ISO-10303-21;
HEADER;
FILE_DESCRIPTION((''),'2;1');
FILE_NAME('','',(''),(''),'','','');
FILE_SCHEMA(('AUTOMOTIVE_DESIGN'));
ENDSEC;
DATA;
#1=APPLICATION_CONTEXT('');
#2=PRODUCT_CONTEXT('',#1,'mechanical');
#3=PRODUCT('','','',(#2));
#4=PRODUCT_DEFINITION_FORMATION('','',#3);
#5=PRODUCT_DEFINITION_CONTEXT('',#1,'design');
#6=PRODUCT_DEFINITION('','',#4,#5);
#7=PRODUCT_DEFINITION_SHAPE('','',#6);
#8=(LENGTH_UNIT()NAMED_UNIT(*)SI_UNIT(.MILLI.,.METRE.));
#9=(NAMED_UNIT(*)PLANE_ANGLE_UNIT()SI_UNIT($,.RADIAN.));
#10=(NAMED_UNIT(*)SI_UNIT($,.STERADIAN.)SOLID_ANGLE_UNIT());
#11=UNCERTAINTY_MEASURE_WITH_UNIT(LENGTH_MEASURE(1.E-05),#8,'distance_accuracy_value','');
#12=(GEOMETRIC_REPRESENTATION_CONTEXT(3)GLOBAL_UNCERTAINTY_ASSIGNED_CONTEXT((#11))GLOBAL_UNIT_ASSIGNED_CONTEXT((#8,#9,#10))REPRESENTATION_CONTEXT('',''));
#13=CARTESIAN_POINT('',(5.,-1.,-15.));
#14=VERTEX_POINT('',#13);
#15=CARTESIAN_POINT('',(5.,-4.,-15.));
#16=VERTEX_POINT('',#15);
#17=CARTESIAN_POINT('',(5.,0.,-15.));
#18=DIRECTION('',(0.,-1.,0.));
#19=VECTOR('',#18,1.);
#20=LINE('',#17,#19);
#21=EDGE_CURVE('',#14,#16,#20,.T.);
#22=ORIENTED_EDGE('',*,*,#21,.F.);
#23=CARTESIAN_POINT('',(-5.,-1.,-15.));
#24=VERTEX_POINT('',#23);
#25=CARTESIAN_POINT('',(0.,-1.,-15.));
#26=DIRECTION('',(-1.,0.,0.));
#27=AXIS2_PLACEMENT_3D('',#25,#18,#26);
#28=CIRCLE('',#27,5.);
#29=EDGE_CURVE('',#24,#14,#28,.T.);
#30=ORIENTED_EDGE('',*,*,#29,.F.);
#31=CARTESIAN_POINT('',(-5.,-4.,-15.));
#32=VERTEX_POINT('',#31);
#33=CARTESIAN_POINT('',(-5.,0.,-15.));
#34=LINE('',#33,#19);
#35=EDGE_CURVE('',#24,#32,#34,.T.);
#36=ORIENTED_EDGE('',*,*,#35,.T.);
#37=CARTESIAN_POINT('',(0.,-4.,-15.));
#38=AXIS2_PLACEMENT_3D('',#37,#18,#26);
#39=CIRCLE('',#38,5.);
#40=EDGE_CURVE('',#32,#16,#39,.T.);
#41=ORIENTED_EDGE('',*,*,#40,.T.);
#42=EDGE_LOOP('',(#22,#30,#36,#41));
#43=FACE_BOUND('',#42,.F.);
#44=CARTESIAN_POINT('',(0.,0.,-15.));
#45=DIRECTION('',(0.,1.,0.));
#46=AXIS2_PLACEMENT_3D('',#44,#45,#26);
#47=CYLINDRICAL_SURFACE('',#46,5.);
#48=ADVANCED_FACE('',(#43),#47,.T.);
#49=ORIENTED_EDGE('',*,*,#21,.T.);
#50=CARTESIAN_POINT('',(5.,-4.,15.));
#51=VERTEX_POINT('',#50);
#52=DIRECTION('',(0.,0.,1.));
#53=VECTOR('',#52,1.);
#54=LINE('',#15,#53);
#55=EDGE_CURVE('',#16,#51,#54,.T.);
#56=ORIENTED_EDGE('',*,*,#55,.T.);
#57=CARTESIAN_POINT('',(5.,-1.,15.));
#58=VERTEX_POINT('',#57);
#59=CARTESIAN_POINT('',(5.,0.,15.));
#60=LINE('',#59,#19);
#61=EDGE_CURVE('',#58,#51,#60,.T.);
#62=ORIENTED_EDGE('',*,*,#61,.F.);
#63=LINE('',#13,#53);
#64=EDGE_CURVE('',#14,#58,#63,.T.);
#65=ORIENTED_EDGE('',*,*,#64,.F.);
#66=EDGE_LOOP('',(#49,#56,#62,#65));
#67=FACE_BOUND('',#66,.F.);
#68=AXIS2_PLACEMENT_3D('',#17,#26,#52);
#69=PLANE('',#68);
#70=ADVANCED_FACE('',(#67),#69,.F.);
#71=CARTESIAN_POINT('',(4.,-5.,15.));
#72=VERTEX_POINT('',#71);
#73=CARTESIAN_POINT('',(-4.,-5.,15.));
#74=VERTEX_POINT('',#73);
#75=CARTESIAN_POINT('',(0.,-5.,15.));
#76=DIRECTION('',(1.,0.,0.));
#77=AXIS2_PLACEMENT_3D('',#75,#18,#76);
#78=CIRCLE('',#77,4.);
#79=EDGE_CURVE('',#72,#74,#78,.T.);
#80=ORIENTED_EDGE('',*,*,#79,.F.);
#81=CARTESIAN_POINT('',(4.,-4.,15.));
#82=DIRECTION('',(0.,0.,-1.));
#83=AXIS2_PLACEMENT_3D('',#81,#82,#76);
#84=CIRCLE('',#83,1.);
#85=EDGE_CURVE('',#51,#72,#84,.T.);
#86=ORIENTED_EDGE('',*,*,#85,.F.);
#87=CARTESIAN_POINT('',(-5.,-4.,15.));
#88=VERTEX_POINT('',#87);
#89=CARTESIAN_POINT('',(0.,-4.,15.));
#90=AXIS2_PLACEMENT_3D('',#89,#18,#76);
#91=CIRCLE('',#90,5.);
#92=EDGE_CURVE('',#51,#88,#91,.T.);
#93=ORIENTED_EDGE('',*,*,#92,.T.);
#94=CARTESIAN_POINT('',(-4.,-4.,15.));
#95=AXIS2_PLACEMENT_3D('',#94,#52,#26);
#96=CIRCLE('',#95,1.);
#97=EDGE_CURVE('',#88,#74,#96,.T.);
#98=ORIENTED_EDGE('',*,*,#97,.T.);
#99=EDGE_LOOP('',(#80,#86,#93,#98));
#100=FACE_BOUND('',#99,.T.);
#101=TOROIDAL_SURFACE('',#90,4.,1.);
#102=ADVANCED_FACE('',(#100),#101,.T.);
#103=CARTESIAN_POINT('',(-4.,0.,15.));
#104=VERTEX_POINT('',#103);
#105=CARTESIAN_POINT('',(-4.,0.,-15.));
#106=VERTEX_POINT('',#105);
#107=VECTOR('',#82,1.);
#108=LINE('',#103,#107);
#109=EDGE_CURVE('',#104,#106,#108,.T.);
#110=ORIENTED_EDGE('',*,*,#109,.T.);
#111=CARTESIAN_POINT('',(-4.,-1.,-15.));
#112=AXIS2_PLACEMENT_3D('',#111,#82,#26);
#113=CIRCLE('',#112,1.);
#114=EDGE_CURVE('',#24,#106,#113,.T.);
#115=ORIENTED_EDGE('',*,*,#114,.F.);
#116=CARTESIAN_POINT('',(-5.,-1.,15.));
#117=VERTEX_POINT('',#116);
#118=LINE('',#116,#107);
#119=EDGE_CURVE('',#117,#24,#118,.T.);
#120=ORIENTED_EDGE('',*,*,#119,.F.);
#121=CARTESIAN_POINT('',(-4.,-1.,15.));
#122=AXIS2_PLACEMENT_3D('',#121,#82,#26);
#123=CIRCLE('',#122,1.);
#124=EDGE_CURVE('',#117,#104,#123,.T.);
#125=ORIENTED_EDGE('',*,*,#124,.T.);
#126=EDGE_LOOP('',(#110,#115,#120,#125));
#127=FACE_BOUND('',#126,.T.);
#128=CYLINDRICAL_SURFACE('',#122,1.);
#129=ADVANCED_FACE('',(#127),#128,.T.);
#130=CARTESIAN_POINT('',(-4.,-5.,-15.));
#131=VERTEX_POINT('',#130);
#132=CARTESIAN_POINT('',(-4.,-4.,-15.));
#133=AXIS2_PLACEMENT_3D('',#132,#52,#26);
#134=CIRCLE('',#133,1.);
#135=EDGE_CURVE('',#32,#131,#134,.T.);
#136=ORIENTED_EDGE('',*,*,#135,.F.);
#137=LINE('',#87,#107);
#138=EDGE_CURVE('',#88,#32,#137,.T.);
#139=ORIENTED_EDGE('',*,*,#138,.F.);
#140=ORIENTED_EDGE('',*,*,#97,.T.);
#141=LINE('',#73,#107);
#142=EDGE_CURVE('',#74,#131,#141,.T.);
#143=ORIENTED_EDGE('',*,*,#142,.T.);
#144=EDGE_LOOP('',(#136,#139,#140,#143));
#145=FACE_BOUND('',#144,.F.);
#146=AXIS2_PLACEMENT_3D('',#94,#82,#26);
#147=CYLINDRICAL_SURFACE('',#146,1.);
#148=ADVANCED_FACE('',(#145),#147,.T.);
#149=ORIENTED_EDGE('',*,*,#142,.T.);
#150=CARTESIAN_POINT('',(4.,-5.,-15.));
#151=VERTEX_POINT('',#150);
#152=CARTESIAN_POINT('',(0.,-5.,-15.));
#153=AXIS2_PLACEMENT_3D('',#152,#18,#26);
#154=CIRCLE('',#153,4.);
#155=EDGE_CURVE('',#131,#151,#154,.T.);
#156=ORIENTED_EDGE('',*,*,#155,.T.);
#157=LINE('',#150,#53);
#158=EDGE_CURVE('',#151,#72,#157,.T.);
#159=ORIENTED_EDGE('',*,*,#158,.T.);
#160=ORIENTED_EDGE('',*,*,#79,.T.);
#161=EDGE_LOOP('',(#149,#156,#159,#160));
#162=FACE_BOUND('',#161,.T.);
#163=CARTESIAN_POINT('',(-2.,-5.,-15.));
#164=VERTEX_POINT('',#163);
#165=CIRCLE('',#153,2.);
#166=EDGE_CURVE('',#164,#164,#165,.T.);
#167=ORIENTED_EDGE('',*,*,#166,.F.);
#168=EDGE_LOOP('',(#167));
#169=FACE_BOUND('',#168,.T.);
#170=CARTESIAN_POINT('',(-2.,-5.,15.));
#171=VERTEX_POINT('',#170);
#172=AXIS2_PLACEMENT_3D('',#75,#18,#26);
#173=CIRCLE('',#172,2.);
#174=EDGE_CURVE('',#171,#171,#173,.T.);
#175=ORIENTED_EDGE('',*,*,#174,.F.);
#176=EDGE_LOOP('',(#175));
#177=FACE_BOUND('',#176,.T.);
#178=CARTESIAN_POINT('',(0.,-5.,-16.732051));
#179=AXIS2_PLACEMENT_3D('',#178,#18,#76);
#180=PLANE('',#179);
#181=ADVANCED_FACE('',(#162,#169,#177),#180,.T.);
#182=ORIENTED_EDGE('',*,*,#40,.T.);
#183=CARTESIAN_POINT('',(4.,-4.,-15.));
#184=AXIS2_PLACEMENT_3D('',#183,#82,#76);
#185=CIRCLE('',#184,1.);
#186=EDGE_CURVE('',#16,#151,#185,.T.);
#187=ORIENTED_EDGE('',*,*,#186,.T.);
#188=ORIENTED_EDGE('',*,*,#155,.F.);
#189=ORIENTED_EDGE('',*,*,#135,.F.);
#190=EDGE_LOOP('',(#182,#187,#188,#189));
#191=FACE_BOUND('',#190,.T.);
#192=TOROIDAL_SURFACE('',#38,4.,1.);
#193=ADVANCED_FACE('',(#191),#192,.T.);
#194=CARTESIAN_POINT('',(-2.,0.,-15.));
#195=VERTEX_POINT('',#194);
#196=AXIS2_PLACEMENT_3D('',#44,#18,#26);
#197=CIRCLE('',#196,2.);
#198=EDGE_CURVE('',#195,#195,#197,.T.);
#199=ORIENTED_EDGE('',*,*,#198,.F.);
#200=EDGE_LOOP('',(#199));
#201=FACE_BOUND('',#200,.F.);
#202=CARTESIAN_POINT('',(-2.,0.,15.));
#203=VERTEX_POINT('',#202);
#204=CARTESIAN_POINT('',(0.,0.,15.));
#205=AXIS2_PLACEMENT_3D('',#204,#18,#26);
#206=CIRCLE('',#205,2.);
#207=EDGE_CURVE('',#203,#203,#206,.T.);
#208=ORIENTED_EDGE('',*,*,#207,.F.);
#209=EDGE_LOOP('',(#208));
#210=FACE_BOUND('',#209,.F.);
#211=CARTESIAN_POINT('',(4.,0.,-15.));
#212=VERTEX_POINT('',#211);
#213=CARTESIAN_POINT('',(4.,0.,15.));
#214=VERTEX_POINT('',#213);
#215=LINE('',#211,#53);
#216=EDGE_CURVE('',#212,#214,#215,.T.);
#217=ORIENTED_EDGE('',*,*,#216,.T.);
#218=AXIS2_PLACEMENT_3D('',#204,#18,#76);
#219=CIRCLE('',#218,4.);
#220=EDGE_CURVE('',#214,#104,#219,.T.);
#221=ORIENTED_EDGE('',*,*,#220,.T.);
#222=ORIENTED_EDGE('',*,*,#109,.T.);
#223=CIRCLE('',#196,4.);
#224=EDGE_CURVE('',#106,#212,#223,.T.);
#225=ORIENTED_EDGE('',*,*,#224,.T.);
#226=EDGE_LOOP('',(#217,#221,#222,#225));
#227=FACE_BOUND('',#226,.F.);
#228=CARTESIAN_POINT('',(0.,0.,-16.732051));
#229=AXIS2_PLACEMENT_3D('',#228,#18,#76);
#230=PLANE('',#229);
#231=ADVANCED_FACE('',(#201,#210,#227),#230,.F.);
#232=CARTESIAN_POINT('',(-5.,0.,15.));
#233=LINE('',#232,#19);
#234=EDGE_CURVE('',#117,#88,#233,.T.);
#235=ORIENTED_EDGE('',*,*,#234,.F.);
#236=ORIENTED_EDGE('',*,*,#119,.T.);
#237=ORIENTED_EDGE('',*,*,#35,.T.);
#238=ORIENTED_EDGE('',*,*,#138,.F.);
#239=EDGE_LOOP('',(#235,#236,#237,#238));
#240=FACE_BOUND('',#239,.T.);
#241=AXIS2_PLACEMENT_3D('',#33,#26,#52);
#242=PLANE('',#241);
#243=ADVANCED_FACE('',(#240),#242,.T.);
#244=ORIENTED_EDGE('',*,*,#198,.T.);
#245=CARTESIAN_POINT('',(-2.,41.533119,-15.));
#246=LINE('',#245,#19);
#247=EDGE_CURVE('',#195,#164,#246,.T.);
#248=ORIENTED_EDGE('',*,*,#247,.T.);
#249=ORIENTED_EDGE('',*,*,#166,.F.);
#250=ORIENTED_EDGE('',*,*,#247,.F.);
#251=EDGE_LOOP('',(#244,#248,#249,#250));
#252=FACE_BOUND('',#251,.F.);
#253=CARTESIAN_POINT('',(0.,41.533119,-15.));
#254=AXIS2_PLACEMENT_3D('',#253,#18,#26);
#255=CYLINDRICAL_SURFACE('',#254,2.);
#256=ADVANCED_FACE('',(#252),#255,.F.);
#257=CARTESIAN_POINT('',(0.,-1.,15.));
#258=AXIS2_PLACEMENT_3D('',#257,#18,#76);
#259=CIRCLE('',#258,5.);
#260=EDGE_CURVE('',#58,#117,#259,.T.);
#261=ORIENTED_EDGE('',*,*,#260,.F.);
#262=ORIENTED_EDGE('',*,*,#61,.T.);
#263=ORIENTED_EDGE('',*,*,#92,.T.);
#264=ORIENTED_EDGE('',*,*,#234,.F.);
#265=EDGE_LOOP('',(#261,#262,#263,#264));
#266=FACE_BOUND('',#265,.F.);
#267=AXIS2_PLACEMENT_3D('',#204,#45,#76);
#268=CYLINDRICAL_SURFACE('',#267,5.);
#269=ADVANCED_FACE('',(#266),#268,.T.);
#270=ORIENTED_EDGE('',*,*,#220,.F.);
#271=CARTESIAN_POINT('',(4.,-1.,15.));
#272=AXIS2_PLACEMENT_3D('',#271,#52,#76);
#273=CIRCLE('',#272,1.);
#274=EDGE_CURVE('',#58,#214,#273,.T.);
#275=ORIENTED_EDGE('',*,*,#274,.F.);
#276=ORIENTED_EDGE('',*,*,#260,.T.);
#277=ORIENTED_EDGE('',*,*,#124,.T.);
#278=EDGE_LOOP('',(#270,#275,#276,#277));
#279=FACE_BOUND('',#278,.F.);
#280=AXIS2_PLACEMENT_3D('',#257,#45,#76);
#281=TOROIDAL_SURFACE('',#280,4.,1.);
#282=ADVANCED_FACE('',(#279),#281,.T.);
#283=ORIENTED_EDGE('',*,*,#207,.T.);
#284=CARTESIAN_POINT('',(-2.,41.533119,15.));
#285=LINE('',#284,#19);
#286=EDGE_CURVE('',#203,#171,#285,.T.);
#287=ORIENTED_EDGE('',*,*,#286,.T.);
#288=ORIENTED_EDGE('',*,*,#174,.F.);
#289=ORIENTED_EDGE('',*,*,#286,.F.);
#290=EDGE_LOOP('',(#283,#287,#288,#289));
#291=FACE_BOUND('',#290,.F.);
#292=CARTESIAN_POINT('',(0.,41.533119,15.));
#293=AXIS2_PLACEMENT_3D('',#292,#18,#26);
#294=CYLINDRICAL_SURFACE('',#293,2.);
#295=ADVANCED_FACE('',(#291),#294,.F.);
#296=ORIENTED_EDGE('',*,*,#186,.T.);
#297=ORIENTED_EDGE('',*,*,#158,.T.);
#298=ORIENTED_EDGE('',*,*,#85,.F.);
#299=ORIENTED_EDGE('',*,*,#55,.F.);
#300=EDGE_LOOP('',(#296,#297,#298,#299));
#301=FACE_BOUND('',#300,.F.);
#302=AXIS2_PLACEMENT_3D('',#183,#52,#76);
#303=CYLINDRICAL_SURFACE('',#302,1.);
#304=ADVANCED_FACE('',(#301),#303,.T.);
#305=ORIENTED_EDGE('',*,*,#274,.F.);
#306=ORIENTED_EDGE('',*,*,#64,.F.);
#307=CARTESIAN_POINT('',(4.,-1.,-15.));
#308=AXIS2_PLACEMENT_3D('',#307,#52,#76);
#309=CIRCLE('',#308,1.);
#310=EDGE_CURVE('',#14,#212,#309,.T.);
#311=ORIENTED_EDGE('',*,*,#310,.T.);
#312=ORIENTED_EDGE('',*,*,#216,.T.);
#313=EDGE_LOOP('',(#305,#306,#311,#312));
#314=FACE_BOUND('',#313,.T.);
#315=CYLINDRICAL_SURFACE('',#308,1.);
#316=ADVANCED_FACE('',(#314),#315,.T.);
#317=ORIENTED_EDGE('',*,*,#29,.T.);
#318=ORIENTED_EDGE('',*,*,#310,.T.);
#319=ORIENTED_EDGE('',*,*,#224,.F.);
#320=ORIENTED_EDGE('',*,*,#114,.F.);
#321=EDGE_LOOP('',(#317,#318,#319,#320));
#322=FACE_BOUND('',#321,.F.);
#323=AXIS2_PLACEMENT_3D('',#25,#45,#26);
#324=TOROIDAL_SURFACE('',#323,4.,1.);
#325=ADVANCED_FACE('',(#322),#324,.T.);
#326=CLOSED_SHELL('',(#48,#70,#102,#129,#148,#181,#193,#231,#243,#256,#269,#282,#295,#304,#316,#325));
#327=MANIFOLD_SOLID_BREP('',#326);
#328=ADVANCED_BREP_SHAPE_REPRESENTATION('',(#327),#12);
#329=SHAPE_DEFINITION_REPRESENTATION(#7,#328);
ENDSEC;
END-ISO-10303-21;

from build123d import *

# Parameters (mm, degrees)
F0_W     = 10
F0_H     = 30
F1_DEPTH = 5
F3_D     = 4
F4_R     = 1


# Not quite as in the source:
# - a feature of the source that left no trace in its solid (it failed there, or was rolled back) is left out


with BuildPart() as f1:
    # F0 (on Front) → F1 (new body)
    with BuildSketch(Plane.XZ):
        with BuildLine():
            Line((5, -15), (-5, -15))
            ThreePointArc((-5, -15), (0, -20), (5, -15))
        make_face()
        with BuildLine():
            ThreePointArc((5, 15), (0, 20), (-5, 15))
            Line((-5, 15), (5, 15))
        make_face()
        Rectangle(F0_W, F0_H)
    extrude(amount=F1_DEPTH)

    # F3 (through all)
    with Locations(Plane(origin=(0, 0, 0), x_dir=(1, 0, 0), z_dir=(0, 1, 0))):
        with Locations((0, -15), (0, 15)):
            Hole(F3_D / 2)

    # F4
    f4_edges = [f1.edges().sort_by_distance(p)[0] for p in [
        (5, -5, 0),
        (5, 0, 0),
        (0, 0, -20),
        (0, -5, -20),
        (-5, 0, 0),
        (-5, -5, 0),
        (0, 0, 20),
        (0, -5, 20),
    ]]
    fillet(f4_edges, radius=F4_R)


solid = f1.part
